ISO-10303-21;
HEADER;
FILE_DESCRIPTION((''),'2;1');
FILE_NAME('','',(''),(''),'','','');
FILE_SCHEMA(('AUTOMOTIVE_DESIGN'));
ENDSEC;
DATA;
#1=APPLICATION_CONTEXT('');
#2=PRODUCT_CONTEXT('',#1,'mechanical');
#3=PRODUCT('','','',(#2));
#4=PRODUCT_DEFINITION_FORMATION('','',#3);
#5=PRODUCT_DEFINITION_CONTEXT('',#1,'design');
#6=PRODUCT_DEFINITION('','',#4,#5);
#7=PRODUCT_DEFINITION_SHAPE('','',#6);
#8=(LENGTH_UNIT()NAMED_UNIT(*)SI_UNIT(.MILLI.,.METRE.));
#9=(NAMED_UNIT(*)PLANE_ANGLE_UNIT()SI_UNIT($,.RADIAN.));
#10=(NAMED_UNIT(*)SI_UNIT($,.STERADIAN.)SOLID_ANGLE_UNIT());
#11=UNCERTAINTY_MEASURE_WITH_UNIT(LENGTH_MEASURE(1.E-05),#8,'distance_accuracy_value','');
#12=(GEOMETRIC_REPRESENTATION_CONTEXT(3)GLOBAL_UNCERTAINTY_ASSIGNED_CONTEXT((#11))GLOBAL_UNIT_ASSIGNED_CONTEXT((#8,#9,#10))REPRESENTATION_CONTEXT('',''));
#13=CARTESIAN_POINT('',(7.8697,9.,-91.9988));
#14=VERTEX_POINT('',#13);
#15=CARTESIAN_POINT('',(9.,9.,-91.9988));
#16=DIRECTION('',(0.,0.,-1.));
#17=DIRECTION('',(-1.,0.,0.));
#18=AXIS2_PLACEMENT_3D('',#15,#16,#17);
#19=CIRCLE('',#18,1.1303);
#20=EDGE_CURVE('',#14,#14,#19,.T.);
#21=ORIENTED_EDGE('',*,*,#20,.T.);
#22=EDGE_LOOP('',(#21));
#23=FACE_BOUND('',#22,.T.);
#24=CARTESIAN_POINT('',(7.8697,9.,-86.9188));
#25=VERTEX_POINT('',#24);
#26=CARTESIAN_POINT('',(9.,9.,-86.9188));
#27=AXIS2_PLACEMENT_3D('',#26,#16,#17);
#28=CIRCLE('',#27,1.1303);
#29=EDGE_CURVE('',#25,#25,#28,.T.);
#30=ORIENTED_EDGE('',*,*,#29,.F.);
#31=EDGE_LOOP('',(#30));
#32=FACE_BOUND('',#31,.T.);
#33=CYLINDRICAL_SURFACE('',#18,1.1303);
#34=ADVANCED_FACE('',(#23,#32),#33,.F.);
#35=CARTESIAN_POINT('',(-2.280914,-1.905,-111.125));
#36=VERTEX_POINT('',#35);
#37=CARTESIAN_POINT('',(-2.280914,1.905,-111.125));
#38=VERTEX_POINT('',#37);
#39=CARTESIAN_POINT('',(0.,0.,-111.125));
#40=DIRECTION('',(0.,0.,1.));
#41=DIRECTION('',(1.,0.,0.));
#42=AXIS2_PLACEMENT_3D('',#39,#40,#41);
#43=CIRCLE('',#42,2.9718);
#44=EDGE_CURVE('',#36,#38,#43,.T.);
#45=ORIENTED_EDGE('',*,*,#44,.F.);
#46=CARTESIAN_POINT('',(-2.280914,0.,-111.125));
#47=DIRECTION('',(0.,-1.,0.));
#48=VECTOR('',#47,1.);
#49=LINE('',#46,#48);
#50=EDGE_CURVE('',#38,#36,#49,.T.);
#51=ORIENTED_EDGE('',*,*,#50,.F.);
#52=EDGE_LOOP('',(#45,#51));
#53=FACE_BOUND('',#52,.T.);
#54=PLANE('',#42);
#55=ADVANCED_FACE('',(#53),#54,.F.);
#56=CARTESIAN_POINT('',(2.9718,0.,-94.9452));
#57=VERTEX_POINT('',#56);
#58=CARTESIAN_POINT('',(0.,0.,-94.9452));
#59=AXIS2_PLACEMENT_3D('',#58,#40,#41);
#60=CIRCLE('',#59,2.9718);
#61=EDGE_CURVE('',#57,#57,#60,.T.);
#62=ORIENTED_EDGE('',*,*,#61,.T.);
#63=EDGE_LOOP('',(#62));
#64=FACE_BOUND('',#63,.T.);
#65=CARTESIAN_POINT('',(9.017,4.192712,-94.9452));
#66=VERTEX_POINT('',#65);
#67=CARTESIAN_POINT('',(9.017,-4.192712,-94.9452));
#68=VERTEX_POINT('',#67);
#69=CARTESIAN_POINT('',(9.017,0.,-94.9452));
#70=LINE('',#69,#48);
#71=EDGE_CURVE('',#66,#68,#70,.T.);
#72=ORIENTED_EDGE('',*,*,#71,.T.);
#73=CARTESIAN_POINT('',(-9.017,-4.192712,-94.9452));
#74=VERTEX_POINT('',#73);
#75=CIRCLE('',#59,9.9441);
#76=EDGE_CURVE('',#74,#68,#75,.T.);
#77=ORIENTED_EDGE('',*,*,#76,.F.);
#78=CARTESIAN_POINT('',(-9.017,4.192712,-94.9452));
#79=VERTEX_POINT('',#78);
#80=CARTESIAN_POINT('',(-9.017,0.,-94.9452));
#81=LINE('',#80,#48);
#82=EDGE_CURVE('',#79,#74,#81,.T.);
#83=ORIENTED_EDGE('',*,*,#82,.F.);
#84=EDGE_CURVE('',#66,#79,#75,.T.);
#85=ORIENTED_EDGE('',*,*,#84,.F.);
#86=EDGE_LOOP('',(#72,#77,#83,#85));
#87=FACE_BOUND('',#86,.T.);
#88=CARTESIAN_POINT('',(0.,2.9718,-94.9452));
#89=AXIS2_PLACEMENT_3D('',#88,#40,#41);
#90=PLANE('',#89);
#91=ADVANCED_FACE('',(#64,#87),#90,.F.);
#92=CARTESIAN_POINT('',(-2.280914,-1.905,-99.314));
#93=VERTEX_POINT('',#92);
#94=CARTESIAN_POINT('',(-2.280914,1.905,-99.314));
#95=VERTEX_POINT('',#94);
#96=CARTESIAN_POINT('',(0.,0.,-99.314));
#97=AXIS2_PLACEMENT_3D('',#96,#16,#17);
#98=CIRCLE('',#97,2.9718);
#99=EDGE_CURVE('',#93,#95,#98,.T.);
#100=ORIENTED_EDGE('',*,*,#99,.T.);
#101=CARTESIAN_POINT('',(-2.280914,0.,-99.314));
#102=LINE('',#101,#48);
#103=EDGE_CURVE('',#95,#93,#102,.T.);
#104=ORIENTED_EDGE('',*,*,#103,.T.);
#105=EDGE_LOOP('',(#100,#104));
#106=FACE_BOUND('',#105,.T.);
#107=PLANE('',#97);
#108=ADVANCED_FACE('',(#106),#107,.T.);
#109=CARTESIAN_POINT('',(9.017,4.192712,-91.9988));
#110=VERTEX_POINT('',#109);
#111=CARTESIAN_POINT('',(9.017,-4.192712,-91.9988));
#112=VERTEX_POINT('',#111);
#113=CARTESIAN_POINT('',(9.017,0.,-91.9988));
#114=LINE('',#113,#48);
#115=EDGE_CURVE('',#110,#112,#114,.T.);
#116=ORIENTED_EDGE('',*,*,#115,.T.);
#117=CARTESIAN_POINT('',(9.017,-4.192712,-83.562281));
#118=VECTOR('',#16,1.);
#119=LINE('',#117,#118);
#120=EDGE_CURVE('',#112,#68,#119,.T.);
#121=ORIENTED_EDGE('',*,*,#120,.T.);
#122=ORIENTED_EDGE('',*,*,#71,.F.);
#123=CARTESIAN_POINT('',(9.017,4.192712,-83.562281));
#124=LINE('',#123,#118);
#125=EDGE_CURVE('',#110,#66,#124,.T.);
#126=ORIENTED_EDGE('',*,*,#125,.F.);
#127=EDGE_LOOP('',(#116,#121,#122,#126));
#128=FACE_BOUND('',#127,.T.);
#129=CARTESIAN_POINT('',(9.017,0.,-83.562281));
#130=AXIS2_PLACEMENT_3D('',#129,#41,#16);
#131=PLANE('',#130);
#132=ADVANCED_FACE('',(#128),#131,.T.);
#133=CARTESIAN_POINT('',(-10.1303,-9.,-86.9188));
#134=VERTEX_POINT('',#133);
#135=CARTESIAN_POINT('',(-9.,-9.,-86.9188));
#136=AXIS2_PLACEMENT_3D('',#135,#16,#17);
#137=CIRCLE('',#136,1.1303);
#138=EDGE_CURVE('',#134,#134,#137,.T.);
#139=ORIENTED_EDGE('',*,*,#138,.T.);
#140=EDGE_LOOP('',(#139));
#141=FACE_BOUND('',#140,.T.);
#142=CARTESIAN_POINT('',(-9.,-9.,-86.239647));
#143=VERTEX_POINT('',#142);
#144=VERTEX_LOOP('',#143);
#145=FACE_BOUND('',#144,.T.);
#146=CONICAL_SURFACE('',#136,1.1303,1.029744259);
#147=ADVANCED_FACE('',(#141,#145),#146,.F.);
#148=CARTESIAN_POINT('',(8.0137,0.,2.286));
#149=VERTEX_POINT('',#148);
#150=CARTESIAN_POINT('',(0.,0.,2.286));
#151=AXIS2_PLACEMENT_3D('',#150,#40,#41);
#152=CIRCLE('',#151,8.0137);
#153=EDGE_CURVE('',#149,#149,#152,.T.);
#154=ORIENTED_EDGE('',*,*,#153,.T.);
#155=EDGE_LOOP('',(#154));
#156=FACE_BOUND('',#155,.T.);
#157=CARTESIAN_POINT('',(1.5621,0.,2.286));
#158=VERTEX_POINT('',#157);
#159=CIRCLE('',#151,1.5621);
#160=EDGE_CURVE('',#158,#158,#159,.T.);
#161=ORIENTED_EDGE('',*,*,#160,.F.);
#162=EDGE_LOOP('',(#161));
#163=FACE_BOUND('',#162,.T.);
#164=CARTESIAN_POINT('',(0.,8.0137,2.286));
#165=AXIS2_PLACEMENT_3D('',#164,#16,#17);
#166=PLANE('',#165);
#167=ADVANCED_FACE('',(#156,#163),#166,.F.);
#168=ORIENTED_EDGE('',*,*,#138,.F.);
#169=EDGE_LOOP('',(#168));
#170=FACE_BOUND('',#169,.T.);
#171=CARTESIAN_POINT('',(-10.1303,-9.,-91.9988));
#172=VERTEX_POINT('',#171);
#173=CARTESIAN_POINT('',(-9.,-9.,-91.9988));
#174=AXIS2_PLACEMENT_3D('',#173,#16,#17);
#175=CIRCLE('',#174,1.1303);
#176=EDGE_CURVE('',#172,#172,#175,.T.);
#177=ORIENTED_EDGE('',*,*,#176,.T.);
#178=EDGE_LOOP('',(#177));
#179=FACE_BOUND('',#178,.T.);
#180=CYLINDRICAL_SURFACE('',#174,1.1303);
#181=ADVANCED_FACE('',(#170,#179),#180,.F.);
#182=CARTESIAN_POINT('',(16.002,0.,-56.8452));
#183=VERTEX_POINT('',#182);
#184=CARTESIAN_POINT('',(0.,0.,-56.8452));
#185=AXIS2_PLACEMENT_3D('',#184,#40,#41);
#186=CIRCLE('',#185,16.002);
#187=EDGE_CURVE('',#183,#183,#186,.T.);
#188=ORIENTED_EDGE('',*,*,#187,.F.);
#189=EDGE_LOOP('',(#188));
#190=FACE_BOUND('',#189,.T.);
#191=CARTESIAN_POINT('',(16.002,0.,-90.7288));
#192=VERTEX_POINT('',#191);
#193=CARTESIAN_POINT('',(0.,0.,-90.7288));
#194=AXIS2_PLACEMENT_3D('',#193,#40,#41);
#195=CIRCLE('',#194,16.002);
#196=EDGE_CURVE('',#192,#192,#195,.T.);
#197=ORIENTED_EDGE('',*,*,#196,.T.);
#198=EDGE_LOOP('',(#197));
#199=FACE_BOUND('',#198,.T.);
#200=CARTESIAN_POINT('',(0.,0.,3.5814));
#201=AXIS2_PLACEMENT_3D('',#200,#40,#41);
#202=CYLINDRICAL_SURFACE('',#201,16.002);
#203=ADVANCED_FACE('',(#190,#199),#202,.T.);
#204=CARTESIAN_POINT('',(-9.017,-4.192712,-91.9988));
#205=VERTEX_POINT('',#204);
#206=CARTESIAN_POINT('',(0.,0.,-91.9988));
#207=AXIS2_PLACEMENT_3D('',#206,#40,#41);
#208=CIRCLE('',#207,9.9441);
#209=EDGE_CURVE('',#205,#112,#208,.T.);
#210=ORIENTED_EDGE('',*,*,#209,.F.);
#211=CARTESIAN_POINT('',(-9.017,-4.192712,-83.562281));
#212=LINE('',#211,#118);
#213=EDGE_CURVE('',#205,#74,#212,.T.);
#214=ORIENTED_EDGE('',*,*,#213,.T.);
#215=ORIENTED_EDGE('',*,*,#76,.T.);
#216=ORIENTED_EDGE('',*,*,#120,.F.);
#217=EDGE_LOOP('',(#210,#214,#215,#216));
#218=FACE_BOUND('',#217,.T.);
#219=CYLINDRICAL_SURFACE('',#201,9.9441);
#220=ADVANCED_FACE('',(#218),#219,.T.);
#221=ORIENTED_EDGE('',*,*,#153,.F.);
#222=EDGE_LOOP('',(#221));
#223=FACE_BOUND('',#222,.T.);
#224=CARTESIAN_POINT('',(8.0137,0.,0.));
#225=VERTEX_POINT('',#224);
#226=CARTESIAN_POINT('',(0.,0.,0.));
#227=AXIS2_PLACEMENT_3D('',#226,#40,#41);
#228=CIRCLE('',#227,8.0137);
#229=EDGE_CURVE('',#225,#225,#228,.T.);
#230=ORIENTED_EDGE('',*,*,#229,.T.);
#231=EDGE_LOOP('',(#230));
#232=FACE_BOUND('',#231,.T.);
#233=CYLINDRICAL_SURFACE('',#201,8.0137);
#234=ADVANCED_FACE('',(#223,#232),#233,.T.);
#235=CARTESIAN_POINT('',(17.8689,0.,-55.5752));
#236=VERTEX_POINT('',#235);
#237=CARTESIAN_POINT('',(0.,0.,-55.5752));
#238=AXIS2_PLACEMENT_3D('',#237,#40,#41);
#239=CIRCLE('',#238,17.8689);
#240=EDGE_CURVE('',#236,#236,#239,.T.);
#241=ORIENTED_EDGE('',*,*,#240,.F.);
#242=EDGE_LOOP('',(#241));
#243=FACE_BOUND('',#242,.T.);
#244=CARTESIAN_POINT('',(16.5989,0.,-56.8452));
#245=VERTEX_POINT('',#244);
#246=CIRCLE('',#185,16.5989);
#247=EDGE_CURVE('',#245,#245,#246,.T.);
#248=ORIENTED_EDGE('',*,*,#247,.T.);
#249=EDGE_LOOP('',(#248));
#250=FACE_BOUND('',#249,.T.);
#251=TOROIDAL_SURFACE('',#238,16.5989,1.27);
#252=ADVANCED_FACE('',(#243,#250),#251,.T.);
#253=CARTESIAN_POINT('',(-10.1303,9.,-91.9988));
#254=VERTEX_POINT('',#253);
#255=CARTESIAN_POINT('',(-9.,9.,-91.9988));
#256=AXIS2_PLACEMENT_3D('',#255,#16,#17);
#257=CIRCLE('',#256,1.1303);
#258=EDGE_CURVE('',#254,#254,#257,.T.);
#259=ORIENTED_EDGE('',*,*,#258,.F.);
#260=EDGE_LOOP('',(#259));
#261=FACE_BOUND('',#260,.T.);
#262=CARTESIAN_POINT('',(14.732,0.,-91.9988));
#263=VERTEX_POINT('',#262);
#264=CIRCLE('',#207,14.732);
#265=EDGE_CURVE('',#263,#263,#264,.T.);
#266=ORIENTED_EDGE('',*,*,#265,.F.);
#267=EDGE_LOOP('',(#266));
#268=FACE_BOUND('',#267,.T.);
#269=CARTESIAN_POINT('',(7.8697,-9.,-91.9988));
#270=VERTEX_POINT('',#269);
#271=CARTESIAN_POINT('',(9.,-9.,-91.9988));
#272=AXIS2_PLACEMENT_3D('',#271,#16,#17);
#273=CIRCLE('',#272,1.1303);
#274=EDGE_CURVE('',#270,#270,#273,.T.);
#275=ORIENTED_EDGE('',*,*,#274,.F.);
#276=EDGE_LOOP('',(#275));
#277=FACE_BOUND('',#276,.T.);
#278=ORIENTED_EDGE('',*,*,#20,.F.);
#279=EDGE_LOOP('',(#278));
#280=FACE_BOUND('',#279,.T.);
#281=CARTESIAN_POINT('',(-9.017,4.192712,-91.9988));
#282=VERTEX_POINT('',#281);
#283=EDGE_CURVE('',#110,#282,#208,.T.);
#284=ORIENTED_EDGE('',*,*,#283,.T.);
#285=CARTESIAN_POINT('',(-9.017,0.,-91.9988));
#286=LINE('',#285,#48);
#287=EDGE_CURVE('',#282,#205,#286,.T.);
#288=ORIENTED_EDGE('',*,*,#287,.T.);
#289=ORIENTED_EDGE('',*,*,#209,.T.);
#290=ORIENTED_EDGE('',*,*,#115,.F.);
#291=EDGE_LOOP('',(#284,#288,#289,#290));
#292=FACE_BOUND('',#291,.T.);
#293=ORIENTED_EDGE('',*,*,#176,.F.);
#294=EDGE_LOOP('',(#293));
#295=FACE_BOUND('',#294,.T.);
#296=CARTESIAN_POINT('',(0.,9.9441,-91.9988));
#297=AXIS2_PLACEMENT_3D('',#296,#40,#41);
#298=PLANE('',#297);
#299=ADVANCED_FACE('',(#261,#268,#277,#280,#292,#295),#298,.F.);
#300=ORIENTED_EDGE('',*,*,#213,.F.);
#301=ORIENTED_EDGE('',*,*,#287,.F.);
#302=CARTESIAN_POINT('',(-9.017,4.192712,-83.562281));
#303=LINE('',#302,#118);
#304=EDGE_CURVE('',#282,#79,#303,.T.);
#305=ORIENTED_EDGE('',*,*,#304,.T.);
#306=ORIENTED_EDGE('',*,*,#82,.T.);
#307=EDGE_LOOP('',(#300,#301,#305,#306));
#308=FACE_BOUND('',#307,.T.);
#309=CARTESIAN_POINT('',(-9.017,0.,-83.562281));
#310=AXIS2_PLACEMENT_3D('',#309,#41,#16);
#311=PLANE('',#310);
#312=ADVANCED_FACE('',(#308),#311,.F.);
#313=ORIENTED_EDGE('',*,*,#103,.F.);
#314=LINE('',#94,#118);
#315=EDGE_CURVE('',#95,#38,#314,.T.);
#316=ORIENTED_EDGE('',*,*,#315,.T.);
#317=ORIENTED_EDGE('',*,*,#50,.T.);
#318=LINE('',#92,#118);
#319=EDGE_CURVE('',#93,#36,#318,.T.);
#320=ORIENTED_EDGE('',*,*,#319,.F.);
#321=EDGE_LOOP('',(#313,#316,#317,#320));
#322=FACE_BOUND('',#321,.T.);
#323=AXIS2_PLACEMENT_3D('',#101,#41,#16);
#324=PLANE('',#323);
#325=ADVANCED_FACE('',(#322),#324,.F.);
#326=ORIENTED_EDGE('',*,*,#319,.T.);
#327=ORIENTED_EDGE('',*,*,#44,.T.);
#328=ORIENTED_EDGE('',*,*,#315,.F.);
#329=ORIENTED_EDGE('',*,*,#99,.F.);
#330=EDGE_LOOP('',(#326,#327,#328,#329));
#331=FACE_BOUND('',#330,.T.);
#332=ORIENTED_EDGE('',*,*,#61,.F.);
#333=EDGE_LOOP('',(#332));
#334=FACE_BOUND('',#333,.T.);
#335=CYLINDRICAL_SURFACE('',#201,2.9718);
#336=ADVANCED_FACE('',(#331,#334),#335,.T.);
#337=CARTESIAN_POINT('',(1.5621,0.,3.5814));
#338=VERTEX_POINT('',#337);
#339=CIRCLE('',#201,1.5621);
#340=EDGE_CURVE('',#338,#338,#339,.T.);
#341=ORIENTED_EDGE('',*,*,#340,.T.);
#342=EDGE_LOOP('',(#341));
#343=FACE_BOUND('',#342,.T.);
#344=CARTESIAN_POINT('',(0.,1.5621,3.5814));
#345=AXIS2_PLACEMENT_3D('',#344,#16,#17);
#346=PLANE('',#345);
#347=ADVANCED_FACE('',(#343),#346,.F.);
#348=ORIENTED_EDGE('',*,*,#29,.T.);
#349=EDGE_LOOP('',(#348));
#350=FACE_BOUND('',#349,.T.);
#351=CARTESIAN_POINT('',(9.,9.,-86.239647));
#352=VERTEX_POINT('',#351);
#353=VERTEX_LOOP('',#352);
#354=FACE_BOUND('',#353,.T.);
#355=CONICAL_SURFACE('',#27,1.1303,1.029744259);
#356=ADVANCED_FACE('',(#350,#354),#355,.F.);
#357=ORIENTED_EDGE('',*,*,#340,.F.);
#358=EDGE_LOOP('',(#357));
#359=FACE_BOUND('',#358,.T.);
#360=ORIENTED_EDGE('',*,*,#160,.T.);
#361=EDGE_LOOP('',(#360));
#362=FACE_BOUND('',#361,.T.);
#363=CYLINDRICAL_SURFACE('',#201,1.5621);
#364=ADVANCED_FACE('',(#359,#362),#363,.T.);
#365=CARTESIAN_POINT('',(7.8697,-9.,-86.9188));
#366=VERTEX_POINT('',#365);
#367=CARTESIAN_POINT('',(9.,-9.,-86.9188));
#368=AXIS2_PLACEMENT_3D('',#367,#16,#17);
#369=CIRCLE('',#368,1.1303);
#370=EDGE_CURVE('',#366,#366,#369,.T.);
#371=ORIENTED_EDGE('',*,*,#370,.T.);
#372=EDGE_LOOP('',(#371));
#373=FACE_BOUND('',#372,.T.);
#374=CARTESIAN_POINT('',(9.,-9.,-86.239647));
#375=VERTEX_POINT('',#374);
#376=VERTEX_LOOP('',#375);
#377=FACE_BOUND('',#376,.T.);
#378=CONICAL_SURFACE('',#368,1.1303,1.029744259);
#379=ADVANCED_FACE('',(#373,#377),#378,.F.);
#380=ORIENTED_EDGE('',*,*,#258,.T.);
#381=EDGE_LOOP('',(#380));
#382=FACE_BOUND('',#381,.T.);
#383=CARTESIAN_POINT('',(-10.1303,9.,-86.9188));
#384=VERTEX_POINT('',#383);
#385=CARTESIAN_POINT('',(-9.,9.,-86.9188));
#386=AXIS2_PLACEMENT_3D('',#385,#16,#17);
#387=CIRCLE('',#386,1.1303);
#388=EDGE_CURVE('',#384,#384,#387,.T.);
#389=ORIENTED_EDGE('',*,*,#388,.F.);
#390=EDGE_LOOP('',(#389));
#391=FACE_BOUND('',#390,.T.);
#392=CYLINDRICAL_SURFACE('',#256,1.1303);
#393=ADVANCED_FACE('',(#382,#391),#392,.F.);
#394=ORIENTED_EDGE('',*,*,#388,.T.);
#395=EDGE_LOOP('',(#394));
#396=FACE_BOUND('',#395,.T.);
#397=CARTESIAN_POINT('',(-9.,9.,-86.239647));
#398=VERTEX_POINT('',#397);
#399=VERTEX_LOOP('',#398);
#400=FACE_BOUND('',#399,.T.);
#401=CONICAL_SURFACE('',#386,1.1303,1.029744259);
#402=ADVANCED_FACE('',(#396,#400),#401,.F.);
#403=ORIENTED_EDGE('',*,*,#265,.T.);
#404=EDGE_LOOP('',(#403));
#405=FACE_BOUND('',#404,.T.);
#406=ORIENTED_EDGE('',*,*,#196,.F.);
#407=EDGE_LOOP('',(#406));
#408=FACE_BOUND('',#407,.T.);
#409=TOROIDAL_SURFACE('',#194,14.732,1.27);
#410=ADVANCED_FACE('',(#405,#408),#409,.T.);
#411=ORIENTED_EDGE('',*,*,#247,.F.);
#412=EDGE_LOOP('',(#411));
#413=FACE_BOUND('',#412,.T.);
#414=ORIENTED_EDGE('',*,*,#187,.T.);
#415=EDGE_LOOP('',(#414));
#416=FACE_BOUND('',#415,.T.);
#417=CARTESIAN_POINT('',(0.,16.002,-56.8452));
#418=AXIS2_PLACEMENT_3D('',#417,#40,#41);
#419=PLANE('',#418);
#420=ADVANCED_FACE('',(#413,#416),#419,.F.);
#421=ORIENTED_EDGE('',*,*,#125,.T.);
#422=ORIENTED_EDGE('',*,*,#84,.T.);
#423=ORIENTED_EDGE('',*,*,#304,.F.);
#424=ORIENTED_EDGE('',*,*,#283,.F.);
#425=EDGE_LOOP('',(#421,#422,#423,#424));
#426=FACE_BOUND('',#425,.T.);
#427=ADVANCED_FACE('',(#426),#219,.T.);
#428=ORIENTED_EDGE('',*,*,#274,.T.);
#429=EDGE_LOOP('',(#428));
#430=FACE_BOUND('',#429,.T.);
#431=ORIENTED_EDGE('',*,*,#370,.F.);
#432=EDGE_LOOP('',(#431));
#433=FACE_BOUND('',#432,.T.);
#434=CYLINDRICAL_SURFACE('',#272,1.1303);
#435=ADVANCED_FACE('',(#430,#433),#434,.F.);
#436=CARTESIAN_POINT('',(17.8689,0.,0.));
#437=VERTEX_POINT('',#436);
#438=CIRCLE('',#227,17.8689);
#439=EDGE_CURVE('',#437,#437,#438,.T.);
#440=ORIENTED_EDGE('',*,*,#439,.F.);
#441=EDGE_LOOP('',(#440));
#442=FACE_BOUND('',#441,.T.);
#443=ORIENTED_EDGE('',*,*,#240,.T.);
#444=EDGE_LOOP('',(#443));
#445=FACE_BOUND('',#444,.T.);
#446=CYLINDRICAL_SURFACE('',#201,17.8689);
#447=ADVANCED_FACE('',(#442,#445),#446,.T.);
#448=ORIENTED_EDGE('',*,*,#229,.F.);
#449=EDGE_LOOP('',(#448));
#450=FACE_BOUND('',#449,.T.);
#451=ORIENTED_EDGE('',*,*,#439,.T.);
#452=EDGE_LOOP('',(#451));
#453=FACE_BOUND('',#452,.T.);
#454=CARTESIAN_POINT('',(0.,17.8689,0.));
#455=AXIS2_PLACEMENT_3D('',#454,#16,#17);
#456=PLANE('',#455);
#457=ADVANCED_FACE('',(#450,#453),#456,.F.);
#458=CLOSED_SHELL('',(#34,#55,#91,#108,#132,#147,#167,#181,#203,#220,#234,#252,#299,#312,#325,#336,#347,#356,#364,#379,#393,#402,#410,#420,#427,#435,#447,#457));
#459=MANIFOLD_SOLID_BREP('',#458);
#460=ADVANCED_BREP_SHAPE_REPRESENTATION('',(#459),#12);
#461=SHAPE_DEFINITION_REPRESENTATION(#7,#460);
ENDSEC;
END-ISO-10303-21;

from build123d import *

# Parameters (mm, degrees)
CUT_EXTRUDE1_START = -2.9464
CUT_EXTRUDE1_DEPTH = 2.9464
CUT_EXTRUDE2_DEPTH = 11.811


# Read off the part's stored shape, not the designer's step: #4-40 Tapped Hole1
with BuildPart() as part:
    # Sketch1 → Revolve1 (revolve)
    with BuildSketch(Plane(origin=(0, 0, 0), x_dir=(0, 0, -1), z_dir=(1, 0, 0)), mode=Mode.PRIVATE) as revolve1_sk:
        with BuildLine():
            Line((111.125, 0), (111.125, 2.9718))
            Line((111.125, 2.9718), (94.9452, 2.9718))
            Line((94.9452, 2.9718), (94.9452, 9.9441))
            Line((94.9452, 9.9441), (91.9988, 9.9441))
            Line((91.9988, 9.9441), (91.9988, 14.732))
            ThreePointArc((91.9988, 14.732), (91.626825612, 15.630025612), (90.7288, 16.002))
            Line((90.7288, 16.002), (56.8452, 16.002))
            Line((56.8452, 16.002), (56.8452, 16.5989))
            ThreePointArc((56.8452, 16.5989), (56.473225612, 17.496925612), (55.5752, 17.8689))
            Line((55.5752, 17.8689), (0, 17.8689))
            Line((0, 17.8689), (0, 8.0137))
            Line((0, 8.0137), (-2.286, 8.0137))
            Line((-2.286, 8.0137), (-2.286, 1.5621))
            Line((-2.286, 1.5621), (-3.5814, 1.5621))
            Line((-3.5814, 1.5621), (-3.5814, 0))
            Line((-3.5814, 0), (111.125, 0))
        make_face()
    revolve(revolve1_sk.sketch.rotate(Axis((0, 0, 3.5814), (0, 0, -1)), 90), axis=Axis((0, 0, 3.5814), (0, 0, -1)))

    # #4-40 Tapped Hole1 outline → #4-40 Tapped Hole1 (revolve, cut)
    with BuildSketch(Plane(origin=(-9, -9, 0), x_dir=(1, 0, 0), z_dir=(0, -1, 0))):
        Polygon((1.1303, -86.9188), (0, -86.239647242), (0, -91.9988), (1.1303, -91.9988), align=None)
    revolve(axis=Axis((-9, -9, 0), (0, 0, 1)), mode=Mode.SUBTRACT)

    # 4-40 Tapped Hole1 2 outline → 4-40 Tapped Hole1 2 (revolve, cut)
    with BuildSketch(Plane(origin=(9, 9, 0), x_dir=(1, 0, 0), z_dir=(0, -1, 0))):
        Polygon((1.1303, -86.9188), (0, -86.239647242), (0, -91.9988), (1.1303, -91.9988), align=None)
    revolve(axis=Axis((9, 9, 0), (0, 0, 1)), mode=Mode.SUBTRACT)

    # 4-40 Tapped Hole1 3 outline → 4-40 Tapped Hole1 3 (revolve, cut)
    with BuildSketch(Plane(origin=(9, -9, 0), x_dir=(1, 0, 0), z_dir=(0, -1, 0))):
        Polygon((1.1303, -86.9188), (0, -86.239647242), (0, -91.9988), (1.1303, -91.9988), align=None)
    revolve(axis=Axis((9, -9, 0), (0, 0, 1)), mode=Mode.SUBTRACT)

    # 4-40 Tapped Hole1 4 outline → 4-40 Tapped Hole1 4 (revolve, cut)
    with BuildSketch(Plane(origin=(-9, 9, 0), x_dir=(1, 0, 0), z_dir=(0, -1, 0))):
        Polygon((1.1303, -86.9188), (0, -86.239647242), (0, -91.9988), (1.1303, -91.9988), align=None)
    revolve(axis=Axis((-9, 9, 0), (0, 0, 1)), mode=Mode.SUBTRACT)

    # Sketch5 → Cut-Extrude1 (cut)
    with BuildSketch(Plane(origin=(0, 0, -94.9452), x_dir=(-1, 0, 0), z_dir=(0, 0, -1)).offset(CUT_EXTRUDE1_START)):
        with BuildLine():
            Line((-9.017, -4.192712226), (-9.017, 4.192712226))
            ThreePointArc((-9.017, 4.192712226), (-9.9441, 0), (-9.017, -4.192712226))
        make_face()
        with BuildLine():
            ThreePointArc((9.9441, 0), (9.709559066, 2.146995006), (9.017, 4.192712226))
            Line((9.017, 4.192712226), (9.017, -4.192712226))
            ThreePointArc((9.017, -4.192712226), (9.709559066, -2.146995006), (9.9441, 0))
        make_face()
    extrude(amount=CUT_EXTRUDE1_DEPTH, mode=Mode.SUBTRACT)

    # Sketch6 → Cut-Extrude2 (cut)
    with BuildSketch(Plane(origin=(0, 0, -111.125), x_dir=(-1, 0, 0), z_dir=(0, 0, -1))):
        Polygon((2.280914343, 68.368161202), (2.280914343, 1.905), (2.280914343, -1.905), (2.280914343, -68.368161202), (135.207236746, -68.368161202), (135.207236746, 68.368161202), align=None)
    extrude(amount=-CUT_EXTRUDE2_DEPTH, mode=Mode.SUBTRACT)


solid = part.part
